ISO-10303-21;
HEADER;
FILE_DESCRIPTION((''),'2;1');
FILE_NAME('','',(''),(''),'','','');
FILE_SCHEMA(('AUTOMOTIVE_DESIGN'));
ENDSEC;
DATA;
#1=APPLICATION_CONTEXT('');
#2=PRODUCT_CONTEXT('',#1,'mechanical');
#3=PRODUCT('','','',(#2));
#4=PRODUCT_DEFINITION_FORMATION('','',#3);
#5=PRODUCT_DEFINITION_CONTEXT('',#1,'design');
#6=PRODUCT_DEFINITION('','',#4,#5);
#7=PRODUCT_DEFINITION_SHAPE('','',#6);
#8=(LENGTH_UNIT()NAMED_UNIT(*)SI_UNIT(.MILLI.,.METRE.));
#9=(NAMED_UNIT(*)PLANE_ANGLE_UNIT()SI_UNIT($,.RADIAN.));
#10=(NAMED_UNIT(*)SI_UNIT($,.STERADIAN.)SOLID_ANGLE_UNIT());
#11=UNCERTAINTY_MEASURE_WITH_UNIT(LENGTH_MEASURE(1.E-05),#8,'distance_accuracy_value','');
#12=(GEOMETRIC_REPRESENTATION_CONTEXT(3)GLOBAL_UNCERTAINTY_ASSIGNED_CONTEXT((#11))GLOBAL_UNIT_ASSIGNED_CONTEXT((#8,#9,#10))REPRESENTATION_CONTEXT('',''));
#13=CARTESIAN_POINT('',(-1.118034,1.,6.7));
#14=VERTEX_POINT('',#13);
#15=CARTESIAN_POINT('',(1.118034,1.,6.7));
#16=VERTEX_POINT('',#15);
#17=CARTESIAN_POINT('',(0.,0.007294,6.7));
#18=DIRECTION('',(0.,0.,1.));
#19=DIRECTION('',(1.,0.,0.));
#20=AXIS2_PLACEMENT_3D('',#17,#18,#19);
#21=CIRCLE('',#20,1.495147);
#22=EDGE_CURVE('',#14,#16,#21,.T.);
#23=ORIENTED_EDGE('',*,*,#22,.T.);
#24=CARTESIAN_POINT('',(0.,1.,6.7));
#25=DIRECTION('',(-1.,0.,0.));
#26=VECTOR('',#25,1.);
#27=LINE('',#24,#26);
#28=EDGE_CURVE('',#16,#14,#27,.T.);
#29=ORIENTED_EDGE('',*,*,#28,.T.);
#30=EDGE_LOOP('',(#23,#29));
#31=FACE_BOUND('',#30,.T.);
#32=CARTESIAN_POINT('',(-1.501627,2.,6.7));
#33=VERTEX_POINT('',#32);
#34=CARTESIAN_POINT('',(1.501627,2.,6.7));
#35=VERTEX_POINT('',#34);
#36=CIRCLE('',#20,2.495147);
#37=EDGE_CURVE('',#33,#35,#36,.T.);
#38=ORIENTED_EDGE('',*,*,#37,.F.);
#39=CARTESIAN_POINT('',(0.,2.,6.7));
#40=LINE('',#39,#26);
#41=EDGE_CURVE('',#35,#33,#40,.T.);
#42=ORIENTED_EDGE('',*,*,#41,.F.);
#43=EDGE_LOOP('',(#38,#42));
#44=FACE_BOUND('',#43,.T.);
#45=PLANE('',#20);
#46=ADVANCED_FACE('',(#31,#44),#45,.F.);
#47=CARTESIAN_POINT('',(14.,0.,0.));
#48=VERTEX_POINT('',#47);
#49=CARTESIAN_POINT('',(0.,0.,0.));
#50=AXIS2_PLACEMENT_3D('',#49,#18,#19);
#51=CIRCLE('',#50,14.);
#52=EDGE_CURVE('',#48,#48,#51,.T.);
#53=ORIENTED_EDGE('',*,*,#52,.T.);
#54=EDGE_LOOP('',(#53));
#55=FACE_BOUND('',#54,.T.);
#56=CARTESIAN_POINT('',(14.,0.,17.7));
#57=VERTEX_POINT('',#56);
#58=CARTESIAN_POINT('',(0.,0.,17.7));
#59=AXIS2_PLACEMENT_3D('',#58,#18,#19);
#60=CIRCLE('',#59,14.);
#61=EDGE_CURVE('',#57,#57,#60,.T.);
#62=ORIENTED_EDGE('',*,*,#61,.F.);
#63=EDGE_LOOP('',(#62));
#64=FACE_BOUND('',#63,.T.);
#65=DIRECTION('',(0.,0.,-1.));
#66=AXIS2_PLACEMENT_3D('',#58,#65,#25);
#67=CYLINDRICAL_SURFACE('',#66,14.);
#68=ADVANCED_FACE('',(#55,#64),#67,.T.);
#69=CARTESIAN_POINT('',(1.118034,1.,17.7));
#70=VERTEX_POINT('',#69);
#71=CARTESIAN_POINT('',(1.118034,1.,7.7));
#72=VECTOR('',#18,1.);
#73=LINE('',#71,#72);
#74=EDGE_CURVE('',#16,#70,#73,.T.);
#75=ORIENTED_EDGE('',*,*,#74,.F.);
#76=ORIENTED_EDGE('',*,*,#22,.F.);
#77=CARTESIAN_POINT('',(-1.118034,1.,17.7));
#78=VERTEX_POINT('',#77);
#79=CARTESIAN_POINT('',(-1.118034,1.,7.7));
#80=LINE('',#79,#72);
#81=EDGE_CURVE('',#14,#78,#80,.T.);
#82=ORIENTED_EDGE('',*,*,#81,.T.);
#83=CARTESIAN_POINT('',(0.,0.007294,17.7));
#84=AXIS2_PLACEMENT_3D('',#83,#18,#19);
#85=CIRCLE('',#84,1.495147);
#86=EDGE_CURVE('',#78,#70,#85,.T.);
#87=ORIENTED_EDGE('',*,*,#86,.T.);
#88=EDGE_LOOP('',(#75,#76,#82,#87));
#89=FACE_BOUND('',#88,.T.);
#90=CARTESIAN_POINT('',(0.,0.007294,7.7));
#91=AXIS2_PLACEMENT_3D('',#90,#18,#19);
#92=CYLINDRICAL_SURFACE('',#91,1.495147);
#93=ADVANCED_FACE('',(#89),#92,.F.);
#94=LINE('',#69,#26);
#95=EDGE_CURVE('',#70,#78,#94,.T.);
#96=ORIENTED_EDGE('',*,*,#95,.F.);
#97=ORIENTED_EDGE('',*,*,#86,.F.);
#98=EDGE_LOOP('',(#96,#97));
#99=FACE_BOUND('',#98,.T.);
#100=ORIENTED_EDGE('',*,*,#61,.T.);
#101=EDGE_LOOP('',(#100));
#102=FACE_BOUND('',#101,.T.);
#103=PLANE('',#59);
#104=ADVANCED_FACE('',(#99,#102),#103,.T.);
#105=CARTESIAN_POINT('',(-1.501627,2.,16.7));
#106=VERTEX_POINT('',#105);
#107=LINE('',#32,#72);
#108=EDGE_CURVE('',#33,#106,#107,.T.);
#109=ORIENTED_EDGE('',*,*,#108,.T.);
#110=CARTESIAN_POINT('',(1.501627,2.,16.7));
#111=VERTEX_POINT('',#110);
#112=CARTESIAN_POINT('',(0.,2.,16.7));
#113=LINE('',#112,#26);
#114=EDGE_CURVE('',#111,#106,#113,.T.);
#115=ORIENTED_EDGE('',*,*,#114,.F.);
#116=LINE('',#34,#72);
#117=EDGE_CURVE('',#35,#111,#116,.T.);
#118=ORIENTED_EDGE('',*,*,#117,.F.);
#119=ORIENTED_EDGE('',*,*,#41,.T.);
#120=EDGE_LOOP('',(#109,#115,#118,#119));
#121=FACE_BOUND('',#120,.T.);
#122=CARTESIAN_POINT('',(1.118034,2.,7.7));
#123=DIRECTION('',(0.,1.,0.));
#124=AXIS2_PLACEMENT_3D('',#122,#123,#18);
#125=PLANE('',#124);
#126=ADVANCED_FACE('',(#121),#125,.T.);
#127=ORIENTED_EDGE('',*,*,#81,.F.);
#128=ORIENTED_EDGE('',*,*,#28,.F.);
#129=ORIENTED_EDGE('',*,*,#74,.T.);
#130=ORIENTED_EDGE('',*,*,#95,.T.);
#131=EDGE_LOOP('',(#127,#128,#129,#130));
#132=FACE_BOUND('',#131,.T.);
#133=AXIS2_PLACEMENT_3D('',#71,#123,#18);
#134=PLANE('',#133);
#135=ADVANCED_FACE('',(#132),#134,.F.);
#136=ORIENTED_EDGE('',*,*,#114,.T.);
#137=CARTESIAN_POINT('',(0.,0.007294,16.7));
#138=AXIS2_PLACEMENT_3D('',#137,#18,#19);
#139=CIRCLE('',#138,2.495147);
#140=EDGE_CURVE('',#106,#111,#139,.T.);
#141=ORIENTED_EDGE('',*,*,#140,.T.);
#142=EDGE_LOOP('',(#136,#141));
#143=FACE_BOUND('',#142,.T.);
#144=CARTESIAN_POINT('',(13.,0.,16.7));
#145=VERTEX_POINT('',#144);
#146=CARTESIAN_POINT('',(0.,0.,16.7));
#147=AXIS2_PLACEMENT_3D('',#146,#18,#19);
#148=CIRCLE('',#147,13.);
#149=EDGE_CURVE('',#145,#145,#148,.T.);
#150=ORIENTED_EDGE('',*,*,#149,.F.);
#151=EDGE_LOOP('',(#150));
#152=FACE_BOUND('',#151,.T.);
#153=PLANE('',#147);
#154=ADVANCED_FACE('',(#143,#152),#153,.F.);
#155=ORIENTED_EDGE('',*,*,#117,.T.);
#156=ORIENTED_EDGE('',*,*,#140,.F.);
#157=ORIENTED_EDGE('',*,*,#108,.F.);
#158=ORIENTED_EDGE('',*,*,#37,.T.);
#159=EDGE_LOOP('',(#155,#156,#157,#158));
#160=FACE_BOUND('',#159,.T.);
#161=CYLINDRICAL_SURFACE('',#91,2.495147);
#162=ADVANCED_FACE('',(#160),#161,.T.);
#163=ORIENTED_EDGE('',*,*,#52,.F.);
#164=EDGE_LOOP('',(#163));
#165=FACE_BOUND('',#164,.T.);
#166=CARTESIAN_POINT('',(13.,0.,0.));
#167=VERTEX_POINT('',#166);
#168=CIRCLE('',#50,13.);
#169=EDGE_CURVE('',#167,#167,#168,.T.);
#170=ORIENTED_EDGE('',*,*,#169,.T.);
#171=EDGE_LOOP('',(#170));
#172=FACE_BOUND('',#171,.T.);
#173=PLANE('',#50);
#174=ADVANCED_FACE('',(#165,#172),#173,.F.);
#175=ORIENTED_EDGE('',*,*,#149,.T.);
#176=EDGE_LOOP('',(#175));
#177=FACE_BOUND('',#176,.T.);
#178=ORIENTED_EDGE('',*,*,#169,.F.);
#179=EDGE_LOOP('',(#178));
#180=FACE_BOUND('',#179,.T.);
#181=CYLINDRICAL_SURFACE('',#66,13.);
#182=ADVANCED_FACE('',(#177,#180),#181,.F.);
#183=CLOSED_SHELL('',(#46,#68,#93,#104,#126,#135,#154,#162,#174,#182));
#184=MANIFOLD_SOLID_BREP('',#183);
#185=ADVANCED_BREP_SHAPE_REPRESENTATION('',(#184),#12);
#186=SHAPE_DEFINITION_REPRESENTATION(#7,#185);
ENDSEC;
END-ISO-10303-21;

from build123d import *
from build123d.topology import SkipClean

# Parameters (mm, degrees)
CROQUIS2_R              = 14
SALIENTE_EXTRUIR1_DEPTH = 17.7
CORTAR_EXTRUIR1_DEPTH   = 10
VACIADO4_OUTLINE_R      = 13
VACIADO4_DEPTH          = 16.7
VACIADO4_2_DEPTH        = 6.7
CORTAR_EXTRUIR5_DEPTH   = 10


# Read off the part's stored shape, not the designer's step: Vaciado4
with BuildPart() as part:
    # Croquis2 → Saliente-Extruir1 (new body)
    with BuildSketch(Plane.XY):
        Circle(CROQUIS2_R)
    extrude(amount=SALIENTE_EXTRUIR1_DEPTH)

    # Croquis3 → Cortar-Extruir1 (cut)
    with BuildSketch(Plane.XY.offset(17.7)):
        with BuildLine():
            Line((1.118033989, 1), (-1.118033989, 1))
            ThreePointArc((-1.118033989, 1), (0, -1.48785271), (1.118033989, 1))
        make_face()
    extrude(amount=-CORTAR_EXTRUIR1_DEPTH, mode=Mode.SUBTRACT)

    # Vaciado4 outline → Vaciado4 (cut)
    with BuildSketch(Plane.XY):
        Circle(VACIADO4_OUTLINE_R)
        with BuildLine():
            ThreePointArc((1.501626665, 2), (0, -2.48785271), (-1.501626665, 2))
            Line((-1.501626665, 2), (1.501626665, 2))
        make_face(mode=Mode.SUBTRACT)
    extrude(amount=VACIADO4_DEPTH, mode=Mode.SUBTRACT)

    # Vaciado4 2 outline → Vaciado4 2 (cut)
    with BuildSketch(Plane.XY):
        with BuildLine():
            Line((1.501626665, 2), (-1.501626665, 2))
            ThreePointArc((-1.501626665, 2), (0, -2.48785271), (1.501626665, 2))
        make_face()
    extrude(amount=VACIADO4_2_DEPTH, mode=Mode.SUBTRACT)

    # Croquis5 → Cortar-Extruir5 (cut)
    with SkipClean():  # the faces are left unmerged after this step: merging them gives an invalid solid
        with BuildSketch(Plane.XY.offset(7.7)):
            with BuildLine():
                Line((-1.118033989, 1), (1.118033989, 1))
                ThreePointArc((1.118033989, 1), (0, -1.48785271), (-1.118033989, 1))
            make_face()
        extrude(amount=-CORTAR_EXTRUIR5_DEPTH, mode=Mode.SUBTRACT)


solid = part.part
